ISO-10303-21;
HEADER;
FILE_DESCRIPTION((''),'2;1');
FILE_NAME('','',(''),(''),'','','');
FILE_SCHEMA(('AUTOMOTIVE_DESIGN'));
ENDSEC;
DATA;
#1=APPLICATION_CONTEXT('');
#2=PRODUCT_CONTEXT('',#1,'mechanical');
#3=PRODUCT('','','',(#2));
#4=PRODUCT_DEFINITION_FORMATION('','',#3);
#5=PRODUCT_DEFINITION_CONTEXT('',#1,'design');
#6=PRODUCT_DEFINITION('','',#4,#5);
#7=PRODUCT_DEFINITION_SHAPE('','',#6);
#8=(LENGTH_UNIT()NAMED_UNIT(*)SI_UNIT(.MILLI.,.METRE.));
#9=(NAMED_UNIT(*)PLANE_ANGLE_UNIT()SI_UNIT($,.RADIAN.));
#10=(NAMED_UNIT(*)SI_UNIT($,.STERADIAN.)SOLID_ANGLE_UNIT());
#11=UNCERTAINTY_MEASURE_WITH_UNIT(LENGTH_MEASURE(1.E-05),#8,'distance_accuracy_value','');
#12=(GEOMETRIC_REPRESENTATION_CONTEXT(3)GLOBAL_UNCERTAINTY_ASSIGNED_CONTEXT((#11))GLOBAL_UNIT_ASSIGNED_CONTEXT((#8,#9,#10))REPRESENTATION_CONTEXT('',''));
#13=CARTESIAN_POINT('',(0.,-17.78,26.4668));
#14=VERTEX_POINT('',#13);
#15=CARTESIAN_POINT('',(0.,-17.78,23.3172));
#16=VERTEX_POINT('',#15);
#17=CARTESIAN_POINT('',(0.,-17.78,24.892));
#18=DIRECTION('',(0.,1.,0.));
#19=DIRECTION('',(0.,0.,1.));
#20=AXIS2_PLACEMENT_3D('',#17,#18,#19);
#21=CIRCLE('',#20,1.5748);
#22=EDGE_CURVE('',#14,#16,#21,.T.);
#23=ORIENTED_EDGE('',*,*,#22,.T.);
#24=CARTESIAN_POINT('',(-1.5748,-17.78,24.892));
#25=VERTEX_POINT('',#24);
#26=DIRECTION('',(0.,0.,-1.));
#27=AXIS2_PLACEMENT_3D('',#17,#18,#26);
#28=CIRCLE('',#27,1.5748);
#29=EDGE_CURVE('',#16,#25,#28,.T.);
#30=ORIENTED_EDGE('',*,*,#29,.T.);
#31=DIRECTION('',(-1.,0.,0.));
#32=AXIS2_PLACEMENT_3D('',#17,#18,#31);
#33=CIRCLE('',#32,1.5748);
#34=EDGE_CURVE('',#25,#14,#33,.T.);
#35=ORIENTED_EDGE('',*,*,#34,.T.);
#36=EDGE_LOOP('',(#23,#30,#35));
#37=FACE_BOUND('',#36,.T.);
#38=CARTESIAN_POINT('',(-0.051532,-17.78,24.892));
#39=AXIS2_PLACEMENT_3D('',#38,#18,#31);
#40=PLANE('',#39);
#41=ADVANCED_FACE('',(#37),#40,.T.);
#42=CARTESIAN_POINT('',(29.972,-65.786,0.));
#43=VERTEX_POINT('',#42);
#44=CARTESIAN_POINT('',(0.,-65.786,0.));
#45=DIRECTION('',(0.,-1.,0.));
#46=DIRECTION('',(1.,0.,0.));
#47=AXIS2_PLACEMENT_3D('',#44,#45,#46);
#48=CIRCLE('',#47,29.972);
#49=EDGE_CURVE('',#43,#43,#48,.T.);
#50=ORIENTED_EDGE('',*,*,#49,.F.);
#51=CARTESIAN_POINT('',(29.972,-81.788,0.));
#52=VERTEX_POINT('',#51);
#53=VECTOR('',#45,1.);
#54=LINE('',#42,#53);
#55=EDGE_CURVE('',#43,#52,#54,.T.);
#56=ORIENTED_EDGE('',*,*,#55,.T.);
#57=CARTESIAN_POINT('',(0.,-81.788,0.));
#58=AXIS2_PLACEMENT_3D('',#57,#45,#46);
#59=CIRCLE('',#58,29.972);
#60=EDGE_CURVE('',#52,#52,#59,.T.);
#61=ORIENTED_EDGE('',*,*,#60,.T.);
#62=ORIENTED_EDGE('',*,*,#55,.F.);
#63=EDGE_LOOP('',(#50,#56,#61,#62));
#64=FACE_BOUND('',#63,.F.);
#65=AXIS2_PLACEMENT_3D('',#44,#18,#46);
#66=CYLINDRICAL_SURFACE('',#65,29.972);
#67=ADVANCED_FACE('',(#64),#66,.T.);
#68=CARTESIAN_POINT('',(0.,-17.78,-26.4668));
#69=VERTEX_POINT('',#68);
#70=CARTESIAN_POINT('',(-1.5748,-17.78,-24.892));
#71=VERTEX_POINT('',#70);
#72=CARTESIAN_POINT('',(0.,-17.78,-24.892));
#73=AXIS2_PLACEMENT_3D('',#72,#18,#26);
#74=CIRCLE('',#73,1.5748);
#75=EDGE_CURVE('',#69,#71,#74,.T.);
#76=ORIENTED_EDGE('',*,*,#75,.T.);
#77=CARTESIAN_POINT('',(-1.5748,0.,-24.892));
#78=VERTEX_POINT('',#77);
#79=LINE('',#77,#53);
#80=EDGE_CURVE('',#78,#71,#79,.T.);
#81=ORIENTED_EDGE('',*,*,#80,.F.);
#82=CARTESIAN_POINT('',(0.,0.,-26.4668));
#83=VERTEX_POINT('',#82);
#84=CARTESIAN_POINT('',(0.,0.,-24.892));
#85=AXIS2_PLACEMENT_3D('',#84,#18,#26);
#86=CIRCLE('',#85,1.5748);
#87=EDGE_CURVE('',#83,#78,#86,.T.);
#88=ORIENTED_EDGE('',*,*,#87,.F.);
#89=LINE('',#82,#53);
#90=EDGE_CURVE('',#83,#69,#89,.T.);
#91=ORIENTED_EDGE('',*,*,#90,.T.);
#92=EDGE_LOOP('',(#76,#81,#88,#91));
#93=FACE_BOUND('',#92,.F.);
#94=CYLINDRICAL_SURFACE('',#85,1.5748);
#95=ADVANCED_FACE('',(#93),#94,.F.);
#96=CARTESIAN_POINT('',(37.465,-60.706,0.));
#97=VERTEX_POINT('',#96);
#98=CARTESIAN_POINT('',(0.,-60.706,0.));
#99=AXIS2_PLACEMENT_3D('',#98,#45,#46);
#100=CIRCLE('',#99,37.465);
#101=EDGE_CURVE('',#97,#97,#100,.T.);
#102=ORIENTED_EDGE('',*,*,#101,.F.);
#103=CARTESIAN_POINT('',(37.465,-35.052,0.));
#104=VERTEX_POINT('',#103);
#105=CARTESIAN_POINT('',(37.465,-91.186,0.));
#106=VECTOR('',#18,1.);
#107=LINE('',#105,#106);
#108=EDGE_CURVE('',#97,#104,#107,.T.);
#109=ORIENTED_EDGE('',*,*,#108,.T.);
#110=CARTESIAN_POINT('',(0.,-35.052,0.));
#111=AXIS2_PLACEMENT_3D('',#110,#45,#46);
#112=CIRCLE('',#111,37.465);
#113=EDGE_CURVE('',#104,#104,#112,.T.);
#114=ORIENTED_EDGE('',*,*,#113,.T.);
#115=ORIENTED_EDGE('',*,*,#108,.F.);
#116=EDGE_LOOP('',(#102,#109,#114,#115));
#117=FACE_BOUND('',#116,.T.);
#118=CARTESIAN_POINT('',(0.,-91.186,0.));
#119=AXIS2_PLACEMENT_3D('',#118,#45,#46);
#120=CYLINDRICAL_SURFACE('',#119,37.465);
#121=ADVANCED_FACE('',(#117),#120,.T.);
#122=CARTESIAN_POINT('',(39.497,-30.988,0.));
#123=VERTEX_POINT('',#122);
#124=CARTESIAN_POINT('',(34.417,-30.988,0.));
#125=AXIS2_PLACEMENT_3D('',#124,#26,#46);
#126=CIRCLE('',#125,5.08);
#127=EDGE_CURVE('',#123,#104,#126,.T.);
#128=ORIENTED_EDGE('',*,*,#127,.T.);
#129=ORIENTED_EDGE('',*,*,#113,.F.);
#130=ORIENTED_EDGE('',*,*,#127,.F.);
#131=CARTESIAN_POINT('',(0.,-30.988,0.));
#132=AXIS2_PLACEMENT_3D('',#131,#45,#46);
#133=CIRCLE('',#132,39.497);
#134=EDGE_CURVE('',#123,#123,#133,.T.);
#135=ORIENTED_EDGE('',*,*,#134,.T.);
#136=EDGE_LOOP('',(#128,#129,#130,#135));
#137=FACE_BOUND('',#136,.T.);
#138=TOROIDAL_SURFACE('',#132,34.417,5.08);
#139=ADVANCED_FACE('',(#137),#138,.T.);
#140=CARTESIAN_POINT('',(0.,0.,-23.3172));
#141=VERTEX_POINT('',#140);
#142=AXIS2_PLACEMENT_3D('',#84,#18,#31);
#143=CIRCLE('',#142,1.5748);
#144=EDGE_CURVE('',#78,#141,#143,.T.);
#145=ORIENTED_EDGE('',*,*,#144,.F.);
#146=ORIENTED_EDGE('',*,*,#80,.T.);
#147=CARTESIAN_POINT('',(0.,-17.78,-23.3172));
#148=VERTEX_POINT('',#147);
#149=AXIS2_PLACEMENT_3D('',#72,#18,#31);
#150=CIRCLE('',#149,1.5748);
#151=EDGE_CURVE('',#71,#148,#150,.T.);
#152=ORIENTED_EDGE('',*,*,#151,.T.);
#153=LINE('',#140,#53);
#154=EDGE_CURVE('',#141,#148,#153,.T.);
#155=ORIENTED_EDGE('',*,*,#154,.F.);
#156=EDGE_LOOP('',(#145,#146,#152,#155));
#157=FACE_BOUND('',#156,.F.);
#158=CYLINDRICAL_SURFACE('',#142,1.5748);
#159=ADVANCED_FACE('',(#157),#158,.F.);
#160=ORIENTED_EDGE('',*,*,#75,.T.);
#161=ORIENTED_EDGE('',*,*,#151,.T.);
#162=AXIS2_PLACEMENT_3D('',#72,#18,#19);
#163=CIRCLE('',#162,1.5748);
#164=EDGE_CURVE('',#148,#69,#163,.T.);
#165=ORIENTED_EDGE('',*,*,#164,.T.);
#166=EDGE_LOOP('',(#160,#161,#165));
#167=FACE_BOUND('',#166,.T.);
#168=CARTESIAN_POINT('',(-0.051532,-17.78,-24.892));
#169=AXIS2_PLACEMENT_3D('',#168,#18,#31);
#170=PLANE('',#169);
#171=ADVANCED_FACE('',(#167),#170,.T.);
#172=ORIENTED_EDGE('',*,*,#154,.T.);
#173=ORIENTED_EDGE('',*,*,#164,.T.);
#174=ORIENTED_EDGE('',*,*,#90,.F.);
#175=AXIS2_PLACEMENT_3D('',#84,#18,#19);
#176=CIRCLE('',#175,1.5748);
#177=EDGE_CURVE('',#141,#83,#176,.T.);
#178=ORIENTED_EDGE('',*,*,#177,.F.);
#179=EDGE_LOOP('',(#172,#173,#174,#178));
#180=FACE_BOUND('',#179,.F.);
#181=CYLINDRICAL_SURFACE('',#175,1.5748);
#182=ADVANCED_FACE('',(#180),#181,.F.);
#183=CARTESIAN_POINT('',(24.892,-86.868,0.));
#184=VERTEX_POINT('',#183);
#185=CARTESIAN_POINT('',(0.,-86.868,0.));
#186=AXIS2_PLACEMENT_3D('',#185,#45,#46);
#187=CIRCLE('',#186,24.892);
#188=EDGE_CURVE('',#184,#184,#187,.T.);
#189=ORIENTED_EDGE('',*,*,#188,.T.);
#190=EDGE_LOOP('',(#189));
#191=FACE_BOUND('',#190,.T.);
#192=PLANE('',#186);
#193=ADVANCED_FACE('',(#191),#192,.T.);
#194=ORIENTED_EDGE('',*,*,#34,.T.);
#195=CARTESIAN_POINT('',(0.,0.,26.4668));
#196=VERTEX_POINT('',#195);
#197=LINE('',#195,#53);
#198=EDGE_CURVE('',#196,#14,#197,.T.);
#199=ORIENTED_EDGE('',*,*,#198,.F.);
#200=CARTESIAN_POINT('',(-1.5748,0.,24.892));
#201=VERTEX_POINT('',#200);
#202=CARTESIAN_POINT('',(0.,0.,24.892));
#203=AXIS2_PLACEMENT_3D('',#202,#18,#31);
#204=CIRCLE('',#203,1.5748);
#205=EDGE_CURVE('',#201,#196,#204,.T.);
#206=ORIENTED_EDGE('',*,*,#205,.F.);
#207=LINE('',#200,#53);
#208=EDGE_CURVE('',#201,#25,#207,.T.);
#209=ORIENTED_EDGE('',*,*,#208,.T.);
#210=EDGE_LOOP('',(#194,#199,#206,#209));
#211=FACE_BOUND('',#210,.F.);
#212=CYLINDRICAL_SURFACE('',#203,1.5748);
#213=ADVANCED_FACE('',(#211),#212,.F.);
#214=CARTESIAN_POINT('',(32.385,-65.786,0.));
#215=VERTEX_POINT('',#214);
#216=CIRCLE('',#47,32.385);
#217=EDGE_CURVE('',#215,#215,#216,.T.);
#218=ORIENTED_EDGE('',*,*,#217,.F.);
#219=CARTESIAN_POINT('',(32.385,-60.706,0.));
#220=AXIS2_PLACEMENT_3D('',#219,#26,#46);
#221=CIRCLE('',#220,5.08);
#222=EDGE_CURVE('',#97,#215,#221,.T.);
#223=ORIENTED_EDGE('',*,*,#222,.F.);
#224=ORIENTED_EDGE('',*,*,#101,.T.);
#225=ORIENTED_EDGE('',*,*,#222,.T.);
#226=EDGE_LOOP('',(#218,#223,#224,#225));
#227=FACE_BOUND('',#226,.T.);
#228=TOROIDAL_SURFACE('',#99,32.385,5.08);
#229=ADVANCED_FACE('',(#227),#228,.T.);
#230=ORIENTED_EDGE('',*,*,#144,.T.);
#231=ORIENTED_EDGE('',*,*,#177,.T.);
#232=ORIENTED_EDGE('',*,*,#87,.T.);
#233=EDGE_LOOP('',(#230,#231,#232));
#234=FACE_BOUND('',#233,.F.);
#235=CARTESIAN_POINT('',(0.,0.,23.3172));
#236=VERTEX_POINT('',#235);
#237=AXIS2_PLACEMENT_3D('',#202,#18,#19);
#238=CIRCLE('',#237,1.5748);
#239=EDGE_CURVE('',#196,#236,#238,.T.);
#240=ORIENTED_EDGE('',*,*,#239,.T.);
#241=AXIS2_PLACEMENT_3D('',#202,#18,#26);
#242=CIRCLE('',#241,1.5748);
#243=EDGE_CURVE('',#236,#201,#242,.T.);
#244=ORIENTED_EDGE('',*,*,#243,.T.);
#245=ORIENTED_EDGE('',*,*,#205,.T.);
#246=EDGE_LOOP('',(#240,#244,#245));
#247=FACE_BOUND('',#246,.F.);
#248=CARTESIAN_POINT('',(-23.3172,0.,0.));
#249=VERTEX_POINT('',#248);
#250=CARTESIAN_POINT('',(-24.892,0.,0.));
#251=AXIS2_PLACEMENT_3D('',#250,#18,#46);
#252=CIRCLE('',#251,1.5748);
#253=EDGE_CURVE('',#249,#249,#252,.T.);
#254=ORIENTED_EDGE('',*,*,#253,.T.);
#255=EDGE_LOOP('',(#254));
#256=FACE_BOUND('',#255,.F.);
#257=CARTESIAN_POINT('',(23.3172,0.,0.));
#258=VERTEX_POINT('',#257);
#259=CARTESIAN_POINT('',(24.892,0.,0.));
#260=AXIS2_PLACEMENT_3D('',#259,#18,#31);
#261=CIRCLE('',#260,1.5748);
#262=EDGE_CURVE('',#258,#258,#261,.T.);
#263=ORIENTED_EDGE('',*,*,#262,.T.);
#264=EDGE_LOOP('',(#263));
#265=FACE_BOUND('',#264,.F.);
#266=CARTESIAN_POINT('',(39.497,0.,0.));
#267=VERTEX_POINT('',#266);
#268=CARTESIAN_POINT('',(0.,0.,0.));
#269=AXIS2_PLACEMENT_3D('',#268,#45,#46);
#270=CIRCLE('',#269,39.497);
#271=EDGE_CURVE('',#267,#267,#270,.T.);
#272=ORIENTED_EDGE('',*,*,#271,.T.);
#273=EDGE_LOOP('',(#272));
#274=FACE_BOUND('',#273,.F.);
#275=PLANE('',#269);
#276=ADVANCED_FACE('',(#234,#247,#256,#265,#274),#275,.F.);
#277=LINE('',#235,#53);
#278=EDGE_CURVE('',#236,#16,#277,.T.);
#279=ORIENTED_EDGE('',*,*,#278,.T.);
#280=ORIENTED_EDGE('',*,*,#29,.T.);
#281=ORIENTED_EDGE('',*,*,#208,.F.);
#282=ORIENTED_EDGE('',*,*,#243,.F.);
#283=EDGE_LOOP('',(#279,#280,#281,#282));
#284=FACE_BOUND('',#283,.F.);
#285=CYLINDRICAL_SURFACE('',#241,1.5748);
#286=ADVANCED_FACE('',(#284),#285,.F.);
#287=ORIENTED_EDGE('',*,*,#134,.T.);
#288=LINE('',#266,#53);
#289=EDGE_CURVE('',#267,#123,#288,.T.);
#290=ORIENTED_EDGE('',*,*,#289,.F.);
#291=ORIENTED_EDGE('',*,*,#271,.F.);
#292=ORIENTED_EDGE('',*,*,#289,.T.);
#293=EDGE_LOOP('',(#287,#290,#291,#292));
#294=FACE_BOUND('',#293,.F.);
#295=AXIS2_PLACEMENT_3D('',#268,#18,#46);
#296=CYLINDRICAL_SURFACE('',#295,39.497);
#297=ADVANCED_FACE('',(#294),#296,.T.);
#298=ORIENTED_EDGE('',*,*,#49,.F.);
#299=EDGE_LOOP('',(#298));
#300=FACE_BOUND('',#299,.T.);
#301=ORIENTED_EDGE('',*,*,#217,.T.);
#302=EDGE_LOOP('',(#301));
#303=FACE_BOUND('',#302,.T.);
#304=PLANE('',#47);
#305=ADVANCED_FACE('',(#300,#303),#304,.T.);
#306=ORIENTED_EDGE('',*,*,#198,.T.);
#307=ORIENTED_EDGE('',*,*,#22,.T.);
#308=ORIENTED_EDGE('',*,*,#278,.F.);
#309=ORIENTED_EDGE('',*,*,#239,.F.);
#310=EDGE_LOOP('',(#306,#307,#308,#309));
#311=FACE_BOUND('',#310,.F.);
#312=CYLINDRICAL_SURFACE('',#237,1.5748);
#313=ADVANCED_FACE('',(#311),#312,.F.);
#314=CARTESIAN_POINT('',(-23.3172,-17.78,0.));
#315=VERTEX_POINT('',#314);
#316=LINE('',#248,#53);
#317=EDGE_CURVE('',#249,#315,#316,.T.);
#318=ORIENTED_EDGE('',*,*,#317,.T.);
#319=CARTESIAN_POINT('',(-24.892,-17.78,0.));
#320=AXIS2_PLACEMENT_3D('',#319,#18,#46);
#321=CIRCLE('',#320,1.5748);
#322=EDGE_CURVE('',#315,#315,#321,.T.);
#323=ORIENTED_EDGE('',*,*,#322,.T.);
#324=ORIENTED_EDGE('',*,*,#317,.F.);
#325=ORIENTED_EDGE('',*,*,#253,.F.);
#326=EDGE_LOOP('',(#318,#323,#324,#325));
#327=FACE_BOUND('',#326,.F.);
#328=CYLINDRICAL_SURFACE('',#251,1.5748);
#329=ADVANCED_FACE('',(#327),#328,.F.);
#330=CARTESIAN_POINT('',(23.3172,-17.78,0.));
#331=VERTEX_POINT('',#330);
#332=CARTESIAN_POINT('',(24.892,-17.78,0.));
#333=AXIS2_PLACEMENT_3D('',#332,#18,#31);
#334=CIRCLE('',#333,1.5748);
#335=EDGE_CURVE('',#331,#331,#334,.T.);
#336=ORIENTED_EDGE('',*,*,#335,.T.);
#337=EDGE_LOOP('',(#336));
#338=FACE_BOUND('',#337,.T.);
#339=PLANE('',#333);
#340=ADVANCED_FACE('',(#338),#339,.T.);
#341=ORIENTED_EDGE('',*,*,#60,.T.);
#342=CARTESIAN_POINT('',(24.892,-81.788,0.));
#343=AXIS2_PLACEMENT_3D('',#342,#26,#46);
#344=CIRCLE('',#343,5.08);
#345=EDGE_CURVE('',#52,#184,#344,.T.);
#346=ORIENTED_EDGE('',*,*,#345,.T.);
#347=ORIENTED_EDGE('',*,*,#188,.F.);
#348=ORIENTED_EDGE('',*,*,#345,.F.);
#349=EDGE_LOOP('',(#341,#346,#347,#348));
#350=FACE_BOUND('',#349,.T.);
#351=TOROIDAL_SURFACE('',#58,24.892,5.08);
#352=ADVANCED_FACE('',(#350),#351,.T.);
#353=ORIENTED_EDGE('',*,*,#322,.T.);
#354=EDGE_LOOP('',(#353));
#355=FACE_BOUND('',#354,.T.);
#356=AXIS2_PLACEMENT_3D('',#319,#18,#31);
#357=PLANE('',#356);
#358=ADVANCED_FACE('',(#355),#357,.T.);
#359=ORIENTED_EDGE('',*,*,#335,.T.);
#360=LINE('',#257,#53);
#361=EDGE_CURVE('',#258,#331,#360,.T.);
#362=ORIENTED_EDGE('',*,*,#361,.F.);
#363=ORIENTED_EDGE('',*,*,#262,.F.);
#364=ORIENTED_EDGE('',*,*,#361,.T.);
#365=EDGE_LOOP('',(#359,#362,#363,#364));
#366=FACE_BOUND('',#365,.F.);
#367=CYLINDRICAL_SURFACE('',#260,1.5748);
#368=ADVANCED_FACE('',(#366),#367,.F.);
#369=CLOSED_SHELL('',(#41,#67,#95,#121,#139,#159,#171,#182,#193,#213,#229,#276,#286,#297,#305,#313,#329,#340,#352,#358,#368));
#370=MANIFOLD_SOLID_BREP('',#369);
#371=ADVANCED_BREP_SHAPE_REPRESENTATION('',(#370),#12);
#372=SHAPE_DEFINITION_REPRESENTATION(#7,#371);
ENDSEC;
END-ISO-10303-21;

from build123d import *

# Parameters (mm, degrees)
F0_R     = 39.497
F1_DEPTH = 91.186
F2_R     = 39.497
F2_R_2   = 37.465
F3_DEPTH = 56.134
F4_R     = 37.465
F4_R_2   = 32.893
F5_DEPTH = 25.4
F6_R     = 29.972
F7_DEPTH = 21.082
F9_DEPTH = 17.78


# Not quite as in the source:
# - a fillet or chamfer that OpenCascade refuses, or shapes differently, is made with other operations: its cross-section is extruded or revolved along the edge and cut away or added


with BuildPart() as f1:
    # F0 (on Front) → F1 (new body)
    with BuildSketch(Plane.XZ):
        Circle(F0_R)
    extrude(amount=F1_DEPTH)

    # F2 (on face) → F3 (cut)
    with BuildSketch(Plane.XZ.offset(91.186)):
        Circle(F2_R)
        Circle(F2_R_2, mode=Mode.SUBTRACT)
    extrude(amount=-F3_DEPTH, mode=Mode.SUBTRACT)

    # F4 (on face) → F5 (cut)
    with BuildSketch(Plane.XZ.offset(91.186)):
        Circle(F4_R)
        Circle(F4_R_2, mode=Mode.SUBTRACT)
        Circle(F4_R_2)
    extrude(amount=-F5_DEPTH, mode=Mode.SUBTRACT)

    # F6 (on face) → F7 (join)
    with BuildSketch(Plane.XZ.offset(65.786)):
        Circle(F6_R)
    extrude(amount=F7_DEPTH)

    # F8 (on face) → F9 (cut)
    with BuildSketch(Plane(origin=(0, 0, 0), x_dir=(-1, 0, 0), z_dir=(0, 1, 0))):
        with BuildLine():
            ThreePointArc((0, 23.3172), (1.113551759, 23.778448241), (1.5748, 24.892))
            ThreePointArc((1.5748, 24.892), (1.113551759, 26.005551759), (0, 26.4668))
            ThreePointArc((0, 26.4668), (-1.5748, 24.892), (0, 23.3172))
        make_face()
        with BuildLine():
            ThreePointArc((26.4668, 0), (24.892, 1.5748), (23.3172, 0))
            ThreePointArc((23.3172, 0), (24.892, -1.5748), (26.4668, 0))
        make_face()
        with BuildLine():
            ThreePointArc((1.5748, -24.892), (1.113551759, -23.778448241), (0, -23.3172))
            ThreePointArc((0, -23.3172), (-1.5748, -24.892), (0, -26.4668))
            ThreePointArc((0, -26.4668), (1.113551759, -26.005551759), (1.5748, -24.892))
        make_face()
        with BuildLine():
            ThreePointArc((-26.4668, 0), (-24.892, -1.5748), (-23.3172, 0))
            ThreePointArc((-23.3172, 0), (-24.892, 1.5748), (-26.4668, 0))
        make_face()
    extrude(amount=-F9_DEPTH, mode=Mode.SUBTRACT)

    # F10: fillet of radius 5.08 on 3 edges, made by hand

    # F10_s1 → F10_t2 (revolve, cut)
    with BuildSketch(Plane.XY):
        with BuildLine():
            ThreePointArc((37.465, -60.706), (35.9771024484, -64.2981024484), (32.385, -65.786))
            Line((32.385, -65.786), (37.465, -65.786))
            Line((37.465, -65.786), (37.465, -60.706))
        make_face()
    revolve(axis=Axis((0, -65.786, 0), (0, -1, 0)), mode=Mode.SUBTRACT)

    # F10_s3 → F10_t4 (revolve, cut)
    with BuildSketch(Plane.XY):
        with BuildLine():
            ThreePointArc((39.497, -30.988), (38.9606901303, -33.2598450651), (37.465, -35.052))
            Line((37.465, -35.052), (39.497, -35.052))
            Line((39.497, -35.052), (39.497, -30.988))
        make_face()
    revolve(axis=Axis((0, -35.052, 0), (0, -1, 0)), mode=Mode.SUBTRACT)

    # F10_s5 → F10_t6 (revolve, cut)
    with BuildSketch(Plane.XY):
        with BuildLine():
            ThreePointArc((29.972, -81.788), (28.4841024484, -85.3801024484), (24.892, -86.868))
            Line((24.892, -86.868), (29.972, -86.868))
            Line((29.972, -86.868), (29.972, -81.788))
        make_face()
    revolve(axis=Axis((0, -86.868, 0), (0, -1, 0)), mode=Mode.SUBTRACT)


solid = f1.part
